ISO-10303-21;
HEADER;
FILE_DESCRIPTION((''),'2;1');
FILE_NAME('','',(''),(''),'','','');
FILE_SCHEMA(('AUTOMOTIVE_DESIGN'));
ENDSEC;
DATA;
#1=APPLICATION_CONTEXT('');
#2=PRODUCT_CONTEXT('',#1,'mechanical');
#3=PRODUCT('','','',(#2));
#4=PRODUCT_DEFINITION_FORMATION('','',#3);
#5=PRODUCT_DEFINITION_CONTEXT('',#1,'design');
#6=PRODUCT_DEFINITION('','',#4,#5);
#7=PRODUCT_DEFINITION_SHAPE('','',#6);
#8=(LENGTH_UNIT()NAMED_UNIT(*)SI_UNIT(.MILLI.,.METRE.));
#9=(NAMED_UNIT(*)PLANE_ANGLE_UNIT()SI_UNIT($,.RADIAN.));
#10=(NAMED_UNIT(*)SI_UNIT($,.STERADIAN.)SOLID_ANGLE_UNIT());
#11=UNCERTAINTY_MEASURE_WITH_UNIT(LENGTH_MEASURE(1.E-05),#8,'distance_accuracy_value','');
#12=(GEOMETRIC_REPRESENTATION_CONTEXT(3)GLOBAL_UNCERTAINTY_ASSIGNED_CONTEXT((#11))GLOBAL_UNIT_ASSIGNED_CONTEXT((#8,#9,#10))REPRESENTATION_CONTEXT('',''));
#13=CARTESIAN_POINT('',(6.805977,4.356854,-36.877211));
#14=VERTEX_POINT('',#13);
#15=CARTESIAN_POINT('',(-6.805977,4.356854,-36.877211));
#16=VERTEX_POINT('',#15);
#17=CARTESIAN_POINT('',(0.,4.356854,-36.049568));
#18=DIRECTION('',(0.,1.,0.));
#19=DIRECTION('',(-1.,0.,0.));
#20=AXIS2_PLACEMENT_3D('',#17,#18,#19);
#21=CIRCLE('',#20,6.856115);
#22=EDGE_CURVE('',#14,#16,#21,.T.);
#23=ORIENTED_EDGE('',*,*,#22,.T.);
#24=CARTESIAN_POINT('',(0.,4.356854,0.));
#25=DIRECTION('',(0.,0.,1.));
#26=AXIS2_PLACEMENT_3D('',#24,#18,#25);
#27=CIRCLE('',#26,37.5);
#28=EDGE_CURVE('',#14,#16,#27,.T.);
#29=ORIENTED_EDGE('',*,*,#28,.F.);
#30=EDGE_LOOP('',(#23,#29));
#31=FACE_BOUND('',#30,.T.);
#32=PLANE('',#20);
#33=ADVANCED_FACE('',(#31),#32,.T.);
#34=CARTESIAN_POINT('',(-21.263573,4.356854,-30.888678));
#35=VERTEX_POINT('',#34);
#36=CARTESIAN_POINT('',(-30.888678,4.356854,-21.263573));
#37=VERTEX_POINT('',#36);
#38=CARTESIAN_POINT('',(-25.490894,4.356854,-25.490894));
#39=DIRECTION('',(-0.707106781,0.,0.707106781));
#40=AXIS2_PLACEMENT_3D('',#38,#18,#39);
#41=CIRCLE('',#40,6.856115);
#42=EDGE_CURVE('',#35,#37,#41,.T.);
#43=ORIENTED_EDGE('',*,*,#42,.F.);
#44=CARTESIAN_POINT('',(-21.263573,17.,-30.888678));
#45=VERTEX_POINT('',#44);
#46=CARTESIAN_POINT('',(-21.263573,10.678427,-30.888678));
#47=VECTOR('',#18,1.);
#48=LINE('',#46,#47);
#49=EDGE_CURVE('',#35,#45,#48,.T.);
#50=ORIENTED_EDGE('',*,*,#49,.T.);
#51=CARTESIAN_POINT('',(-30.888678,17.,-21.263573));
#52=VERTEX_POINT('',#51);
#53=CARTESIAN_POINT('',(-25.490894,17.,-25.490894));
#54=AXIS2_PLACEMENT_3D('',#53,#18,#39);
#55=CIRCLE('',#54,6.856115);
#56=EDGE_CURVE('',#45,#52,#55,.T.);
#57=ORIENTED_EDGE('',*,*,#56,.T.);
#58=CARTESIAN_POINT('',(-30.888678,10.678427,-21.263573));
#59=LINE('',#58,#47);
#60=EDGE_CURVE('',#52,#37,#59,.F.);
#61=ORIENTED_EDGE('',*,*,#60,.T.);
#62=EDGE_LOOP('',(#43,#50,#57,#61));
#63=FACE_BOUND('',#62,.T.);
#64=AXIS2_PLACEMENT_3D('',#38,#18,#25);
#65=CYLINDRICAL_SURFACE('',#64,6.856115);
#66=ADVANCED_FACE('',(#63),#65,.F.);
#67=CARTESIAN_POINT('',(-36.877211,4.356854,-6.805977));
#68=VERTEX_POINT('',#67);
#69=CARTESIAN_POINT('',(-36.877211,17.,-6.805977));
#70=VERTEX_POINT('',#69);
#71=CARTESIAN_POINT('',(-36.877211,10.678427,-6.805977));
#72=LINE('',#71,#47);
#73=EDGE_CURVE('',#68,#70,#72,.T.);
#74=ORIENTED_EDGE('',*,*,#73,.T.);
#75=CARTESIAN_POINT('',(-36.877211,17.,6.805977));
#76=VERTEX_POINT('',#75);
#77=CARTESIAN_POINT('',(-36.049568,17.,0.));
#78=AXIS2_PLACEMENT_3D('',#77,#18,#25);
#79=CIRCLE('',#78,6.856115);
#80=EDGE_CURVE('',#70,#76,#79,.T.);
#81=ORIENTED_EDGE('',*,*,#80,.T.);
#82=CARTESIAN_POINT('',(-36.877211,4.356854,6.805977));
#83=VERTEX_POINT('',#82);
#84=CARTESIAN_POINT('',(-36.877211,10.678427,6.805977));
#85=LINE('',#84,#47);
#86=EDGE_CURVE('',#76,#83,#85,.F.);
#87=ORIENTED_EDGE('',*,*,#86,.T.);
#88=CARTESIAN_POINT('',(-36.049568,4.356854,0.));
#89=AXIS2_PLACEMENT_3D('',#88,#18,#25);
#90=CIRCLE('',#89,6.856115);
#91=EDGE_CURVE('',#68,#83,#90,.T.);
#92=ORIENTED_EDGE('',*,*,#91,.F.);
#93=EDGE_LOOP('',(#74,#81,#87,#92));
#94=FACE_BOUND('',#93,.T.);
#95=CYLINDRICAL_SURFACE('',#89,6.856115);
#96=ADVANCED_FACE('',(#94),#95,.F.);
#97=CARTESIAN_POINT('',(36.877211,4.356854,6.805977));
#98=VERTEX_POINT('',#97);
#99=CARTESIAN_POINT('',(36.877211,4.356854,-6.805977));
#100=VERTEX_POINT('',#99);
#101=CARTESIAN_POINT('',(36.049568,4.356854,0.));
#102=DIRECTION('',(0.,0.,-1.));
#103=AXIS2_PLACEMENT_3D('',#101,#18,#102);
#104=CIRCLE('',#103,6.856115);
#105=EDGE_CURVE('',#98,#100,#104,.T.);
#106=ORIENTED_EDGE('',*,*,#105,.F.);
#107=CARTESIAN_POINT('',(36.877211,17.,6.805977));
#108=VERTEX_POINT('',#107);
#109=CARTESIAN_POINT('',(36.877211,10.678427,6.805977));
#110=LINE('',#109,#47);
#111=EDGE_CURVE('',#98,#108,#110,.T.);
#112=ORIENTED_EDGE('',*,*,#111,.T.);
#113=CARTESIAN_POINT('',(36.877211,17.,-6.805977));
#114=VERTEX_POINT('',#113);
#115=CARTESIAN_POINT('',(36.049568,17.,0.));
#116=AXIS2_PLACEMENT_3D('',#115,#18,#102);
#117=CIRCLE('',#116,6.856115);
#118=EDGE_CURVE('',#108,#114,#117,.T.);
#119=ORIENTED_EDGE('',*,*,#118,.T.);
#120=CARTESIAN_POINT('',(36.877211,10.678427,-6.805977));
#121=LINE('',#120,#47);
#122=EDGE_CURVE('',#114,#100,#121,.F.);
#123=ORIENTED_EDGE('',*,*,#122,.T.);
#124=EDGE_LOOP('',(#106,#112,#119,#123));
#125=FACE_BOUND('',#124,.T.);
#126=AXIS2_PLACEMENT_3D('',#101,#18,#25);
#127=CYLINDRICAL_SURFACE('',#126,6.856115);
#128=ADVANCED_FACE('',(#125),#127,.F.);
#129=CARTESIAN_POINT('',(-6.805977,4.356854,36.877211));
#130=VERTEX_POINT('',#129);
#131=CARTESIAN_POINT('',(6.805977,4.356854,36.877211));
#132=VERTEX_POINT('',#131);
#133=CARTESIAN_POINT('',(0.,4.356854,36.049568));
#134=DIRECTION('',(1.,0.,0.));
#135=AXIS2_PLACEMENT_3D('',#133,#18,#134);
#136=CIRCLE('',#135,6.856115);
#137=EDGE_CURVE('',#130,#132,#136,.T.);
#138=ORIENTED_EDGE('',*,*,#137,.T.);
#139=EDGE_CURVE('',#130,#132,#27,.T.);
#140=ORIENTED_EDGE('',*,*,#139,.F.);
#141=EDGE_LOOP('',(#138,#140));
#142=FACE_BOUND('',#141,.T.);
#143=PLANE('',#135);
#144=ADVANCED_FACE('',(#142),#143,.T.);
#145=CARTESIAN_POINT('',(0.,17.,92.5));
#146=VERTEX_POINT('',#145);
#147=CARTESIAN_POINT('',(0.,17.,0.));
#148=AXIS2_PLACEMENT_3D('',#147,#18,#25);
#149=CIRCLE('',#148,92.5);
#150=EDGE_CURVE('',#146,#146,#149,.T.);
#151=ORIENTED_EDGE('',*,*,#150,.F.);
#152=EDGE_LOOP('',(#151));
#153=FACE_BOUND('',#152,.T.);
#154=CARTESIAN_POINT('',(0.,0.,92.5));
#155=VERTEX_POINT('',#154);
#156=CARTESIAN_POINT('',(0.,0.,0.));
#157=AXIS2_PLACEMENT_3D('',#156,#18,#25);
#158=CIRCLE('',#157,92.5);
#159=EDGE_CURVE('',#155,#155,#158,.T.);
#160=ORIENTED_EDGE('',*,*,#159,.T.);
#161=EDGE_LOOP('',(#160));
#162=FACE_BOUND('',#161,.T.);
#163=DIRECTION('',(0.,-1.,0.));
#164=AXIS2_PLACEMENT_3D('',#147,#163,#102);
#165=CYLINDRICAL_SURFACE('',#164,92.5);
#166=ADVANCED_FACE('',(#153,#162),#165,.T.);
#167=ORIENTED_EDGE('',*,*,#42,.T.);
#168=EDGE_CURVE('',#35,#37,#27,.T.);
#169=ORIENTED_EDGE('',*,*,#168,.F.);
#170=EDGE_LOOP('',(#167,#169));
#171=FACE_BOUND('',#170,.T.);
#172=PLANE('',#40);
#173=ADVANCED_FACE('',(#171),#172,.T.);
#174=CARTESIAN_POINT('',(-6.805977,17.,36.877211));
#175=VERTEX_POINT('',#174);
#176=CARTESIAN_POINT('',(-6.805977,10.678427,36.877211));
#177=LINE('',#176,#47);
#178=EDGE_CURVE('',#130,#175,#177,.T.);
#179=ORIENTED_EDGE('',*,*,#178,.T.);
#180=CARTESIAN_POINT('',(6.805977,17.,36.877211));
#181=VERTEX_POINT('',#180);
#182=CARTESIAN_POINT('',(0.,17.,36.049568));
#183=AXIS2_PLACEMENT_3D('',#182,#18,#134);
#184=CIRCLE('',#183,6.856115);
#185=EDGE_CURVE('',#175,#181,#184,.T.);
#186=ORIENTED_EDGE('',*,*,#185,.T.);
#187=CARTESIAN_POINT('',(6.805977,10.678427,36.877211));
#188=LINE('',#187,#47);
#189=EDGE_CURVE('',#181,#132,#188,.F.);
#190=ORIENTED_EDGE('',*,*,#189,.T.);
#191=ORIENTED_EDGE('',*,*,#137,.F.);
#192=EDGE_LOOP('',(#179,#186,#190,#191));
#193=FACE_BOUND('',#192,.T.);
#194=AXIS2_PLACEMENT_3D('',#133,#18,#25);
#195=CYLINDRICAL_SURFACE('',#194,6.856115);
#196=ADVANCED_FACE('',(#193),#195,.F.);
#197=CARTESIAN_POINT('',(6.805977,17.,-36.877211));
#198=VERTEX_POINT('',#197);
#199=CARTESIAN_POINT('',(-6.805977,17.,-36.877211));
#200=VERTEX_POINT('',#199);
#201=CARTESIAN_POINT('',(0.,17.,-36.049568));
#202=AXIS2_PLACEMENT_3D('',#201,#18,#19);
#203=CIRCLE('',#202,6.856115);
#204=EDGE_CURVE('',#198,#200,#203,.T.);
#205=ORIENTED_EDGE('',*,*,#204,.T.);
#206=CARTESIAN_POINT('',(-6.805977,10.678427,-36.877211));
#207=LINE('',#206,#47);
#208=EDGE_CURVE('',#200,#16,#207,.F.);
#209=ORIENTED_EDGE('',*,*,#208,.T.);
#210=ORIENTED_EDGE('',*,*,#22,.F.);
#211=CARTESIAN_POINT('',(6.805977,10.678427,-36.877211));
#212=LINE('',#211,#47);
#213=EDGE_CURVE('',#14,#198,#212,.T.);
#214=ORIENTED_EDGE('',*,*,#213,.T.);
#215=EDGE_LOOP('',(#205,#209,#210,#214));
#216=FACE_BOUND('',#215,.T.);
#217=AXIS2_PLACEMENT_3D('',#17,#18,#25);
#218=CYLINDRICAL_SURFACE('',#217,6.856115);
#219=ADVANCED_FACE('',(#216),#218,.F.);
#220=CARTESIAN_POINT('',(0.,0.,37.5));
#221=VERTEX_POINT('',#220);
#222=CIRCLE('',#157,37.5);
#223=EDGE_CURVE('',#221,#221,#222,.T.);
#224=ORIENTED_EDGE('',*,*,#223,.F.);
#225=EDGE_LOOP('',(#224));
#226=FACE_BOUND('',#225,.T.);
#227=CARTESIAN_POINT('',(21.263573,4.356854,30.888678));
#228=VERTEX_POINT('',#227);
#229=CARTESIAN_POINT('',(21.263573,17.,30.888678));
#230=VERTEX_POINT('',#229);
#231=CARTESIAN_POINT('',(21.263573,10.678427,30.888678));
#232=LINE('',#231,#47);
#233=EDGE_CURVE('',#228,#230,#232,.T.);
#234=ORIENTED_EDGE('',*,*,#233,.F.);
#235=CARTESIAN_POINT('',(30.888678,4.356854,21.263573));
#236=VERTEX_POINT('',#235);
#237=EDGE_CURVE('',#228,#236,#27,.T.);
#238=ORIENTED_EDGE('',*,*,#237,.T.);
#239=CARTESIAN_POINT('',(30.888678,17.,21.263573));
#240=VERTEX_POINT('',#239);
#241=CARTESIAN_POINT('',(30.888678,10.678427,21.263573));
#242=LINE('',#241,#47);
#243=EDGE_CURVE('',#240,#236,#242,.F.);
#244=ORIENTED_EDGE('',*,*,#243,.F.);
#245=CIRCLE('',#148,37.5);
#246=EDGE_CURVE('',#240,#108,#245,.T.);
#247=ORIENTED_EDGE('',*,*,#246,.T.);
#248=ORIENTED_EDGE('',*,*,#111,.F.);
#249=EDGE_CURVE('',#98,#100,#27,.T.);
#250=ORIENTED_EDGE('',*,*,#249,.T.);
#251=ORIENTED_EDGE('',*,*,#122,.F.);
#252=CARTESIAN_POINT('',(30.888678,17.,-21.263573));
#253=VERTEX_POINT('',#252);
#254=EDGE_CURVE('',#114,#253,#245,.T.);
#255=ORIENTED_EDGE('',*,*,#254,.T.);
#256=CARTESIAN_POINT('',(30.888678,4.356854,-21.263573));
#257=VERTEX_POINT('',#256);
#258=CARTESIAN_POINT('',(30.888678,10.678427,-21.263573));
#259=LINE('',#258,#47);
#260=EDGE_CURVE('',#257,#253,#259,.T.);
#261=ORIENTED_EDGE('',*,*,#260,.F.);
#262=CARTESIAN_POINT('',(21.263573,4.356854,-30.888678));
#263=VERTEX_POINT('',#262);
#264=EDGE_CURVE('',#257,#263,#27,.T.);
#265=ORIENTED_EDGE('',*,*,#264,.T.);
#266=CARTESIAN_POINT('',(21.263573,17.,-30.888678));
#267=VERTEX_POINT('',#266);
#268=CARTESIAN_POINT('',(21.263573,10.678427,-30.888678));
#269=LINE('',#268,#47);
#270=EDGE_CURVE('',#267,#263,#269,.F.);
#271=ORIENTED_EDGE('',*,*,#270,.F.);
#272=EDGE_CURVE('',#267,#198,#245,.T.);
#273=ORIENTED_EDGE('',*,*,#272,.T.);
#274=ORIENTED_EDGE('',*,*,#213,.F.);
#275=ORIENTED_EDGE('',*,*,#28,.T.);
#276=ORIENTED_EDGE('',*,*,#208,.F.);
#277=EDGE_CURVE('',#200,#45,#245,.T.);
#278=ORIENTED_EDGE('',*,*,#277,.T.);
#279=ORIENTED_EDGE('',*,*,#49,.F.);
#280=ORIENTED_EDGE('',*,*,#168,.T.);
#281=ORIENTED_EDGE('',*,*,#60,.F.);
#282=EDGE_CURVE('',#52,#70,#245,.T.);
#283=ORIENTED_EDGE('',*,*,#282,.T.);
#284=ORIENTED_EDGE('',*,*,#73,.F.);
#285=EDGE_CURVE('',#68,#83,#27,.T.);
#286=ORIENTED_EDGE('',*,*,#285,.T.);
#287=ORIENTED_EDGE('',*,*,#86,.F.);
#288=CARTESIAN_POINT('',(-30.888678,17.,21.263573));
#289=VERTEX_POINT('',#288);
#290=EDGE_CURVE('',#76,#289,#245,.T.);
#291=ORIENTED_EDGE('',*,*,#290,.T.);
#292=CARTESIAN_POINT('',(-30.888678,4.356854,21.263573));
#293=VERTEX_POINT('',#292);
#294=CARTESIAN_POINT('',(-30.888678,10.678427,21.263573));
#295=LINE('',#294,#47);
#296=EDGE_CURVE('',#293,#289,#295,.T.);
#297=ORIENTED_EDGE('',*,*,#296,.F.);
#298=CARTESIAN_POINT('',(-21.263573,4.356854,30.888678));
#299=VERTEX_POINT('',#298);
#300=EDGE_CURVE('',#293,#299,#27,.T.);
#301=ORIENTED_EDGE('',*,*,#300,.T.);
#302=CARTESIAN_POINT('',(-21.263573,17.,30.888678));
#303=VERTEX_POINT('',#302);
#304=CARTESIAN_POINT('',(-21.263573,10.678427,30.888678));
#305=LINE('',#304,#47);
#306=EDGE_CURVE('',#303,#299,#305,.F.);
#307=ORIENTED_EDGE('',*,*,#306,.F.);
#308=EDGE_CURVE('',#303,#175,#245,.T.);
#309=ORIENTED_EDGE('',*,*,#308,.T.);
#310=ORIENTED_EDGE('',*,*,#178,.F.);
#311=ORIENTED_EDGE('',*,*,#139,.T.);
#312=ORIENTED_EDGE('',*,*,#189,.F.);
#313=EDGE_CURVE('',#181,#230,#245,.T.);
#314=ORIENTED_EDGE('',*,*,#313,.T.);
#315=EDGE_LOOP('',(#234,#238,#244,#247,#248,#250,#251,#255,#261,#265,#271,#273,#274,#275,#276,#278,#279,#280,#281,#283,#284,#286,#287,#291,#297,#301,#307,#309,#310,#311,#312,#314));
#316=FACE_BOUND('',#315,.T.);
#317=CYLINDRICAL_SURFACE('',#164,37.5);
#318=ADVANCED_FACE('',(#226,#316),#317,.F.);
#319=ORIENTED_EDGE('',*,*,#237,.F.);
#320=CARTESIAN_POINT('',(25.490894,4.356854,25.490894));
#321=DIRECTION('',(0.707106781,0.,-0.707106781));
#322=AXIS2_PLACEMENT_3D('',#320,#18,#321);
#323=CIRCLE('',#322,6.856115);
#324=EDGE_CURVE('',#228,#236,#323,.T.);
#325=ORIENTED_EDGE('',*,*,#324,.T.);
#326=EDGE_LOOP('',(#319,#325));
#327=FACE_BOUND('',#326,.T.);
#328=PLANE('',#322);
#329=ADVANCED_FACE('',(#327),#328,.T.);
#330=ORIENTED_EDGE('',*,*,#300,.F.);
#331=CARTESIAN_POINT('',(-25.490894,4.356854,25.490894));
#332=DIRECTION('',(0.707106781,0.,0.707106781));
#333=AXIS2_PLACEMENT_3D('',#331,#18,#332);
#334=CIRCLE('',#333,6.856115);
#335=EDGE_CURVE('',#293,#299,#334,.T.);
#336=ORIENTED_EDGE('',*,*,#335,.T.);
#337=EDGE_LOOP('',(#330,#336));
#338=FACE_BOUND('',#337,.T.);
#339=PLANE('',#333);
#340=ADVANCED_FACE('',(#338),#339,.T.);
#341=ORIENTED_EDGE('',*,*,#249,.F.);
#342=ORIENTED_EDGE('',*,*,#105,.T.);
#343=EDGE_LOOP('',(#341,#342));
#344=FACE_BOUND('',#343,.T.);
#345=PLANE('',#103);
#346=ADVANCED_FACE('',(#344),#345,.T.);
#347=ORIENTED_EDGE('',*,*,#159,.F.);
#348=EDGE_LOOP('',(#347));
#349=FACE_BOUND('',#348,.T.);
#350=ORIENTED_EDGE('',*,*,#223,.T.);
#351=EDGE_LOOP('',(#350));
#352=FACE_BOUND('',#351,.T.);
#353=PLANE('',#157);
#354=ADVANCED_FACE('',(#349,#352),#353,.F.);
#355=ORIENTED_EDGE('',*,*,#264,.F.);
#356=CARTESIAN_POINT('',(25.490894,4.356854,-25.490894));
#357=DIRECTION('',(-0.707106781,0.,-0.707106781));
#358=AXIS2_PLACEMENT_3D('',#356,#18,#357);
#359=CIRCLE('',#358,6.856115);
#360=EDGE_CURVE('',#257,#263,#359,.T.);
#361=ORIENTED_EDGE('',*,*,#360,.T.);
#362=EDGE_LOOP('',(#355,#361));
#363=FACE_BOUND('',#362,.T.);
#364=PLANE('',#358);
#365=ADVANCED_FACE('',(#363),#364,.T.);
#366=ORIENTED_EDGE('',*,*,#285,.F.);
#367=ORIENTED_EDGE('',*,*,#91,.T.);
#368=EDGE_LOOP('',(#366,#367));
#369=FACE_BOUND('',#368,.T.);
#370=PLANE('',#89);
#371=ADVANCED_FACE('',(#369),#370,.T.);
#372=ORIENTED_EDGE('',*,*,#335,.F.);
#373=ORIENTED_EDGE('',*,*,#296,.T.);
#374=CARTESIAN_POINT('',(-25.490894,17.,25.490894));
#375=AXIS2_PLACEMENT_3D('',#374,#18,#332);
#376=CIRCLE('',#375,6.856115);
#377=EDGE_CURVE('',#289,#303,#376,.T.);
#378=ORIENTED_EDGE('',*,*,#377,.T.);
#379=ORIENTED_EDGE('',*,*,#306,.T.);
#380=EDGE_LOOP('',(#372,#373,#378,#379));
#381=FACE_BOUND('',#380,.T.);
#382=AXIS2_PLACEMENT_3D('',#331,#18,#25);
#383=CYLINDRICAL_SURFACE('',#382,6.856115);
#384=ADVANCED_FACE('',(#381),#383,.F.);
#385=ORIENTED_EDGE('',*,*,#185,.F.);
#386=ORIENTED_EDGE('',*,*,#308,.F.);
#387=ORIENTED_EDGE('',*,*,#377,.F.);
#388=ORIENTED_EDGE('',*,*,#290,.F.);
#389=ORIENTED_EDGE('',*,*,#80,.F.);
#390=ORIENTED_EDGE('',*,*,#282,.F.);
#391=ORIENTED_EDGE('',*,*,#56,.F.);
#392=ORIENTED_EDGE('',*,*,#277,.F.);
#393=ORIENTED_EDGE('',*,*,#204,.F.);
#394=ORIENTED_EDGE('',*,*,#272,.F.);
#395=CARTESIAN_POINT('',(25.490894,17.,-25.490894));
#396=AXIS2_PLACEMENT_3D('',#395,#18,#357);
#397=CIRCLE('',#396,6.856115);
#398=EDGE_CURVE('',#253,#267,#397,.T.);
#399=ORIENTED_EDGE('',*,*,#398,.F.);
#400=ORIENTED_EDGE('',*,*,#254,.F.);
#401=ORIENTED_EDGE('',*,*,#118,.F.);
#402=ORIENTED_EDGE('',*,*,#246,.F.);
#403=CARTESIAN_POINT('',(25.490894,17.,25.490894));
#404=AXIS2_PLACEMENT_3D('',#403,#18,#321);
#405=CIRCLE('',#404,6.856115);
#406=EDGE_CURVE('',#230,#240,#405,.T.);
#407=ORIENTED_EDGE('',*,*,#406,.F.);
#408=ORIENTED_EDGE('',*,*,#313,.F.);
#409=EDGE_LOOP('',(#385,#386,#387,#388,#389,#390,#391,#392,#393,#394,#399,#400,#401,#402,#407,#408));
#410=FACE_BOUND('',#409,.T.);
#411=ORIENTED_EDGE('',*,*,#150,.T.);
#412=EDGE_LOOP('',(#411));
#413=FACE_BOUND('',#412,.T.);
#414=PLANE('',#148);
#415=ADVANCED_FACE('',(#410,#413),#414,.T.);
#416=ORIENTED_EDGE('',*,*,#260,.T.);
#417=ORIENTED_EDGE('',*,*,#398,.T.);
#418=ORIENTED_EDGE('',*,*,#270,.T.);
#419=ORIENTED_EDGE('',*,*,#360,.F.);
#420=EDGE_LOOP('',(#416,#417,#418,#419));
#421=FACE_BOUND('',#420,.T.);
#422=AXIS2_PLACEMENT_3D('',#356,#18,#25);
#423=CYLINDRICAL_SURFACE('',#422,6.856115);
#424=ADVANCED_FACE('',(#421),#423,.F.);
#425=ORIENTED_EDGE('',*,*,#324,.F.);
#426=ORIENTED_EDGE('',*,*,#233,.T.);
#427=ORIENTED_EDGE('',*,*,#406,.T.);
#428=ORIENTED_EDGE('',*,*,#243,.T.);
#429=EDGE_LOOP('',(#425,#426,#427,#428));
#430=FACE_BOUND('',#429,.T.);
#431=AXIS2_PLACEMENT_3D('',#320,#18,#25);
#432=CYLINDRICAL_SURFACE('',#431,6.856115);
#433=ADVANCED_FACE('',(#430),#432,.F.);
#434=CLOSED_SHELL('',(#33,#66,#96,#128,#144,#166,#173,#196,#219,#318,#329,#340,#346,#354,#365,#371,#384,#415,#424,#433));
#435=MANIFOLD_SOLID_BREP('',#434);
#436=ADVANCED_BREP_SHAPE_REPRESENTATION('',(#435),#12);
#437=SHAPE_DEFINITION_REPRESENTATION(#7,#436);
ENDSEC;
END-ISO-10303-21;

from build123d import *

# Parameters (mm, degrees)
SKETCH1_R           = 92.5
BOSS_EXTRUDE1_DEPTH = 17
SKETCH2_R           = 37.5
CUT_EXTRUDE1_DEPTH  = 132.914745196
SKETCH3_R           = 6.856115291
CUT_EXTRUDE2_DEPTH  = 12.643145523
CIRPATTERN1_COUNT   = 8


with BuildPart() as part:
    # Sketch1 → Boss-Extrude1 (new body)
    with BuildSketch(Plane(origin=(0, 0, 0), x_dir=(1, 0, 0), z_dir=(0, 1, 0))):
        Circle(SKETCH1_R)
    extrude(amount=BOSS_EXTRUDE1_DEPTH)

    # Sketch2 → Cut-Extrude1 (cut, through all)
    with BuildSketch(Plane(origin=(0, 0, 0), x_dir=(1, 0, 0), z_dir=(0, 1, 0))):
        Circle(SKETCH2_R)
    extrude(amount=CUT_EXTRUDE1_DEPTH, mode=Mode.SUBTRACT)

    # Sketch3 → Cut-Extrude2 (cut)
    with BuildSketch(Plane(origin=(0, 17, 0), x_dir=(1, 0, 0), z_dir=(0, 1, 0))):
        with Locations((-36.04956806, 0)):
            Circle(SKETCH3_R)
    cut_extrude2 = extrude(amount=-CUT_EXTRUDE2_DEPTH, mode=Mode.SUBTRACT)

    # CirPattern1: Cut-Extrude2 ×8 about axis
    cirpattern1_axis = Axis((0, 0, 0), (0, 1, 0))
    for i in range(1, CIRPATTERN1_COUNT):
        add(cut_extrude2.rotate(cirpattern1_axis, i * 360 / CIRPATTERN1_COUNT), mode=Mode.SUBTRACT)


solid = part.part
